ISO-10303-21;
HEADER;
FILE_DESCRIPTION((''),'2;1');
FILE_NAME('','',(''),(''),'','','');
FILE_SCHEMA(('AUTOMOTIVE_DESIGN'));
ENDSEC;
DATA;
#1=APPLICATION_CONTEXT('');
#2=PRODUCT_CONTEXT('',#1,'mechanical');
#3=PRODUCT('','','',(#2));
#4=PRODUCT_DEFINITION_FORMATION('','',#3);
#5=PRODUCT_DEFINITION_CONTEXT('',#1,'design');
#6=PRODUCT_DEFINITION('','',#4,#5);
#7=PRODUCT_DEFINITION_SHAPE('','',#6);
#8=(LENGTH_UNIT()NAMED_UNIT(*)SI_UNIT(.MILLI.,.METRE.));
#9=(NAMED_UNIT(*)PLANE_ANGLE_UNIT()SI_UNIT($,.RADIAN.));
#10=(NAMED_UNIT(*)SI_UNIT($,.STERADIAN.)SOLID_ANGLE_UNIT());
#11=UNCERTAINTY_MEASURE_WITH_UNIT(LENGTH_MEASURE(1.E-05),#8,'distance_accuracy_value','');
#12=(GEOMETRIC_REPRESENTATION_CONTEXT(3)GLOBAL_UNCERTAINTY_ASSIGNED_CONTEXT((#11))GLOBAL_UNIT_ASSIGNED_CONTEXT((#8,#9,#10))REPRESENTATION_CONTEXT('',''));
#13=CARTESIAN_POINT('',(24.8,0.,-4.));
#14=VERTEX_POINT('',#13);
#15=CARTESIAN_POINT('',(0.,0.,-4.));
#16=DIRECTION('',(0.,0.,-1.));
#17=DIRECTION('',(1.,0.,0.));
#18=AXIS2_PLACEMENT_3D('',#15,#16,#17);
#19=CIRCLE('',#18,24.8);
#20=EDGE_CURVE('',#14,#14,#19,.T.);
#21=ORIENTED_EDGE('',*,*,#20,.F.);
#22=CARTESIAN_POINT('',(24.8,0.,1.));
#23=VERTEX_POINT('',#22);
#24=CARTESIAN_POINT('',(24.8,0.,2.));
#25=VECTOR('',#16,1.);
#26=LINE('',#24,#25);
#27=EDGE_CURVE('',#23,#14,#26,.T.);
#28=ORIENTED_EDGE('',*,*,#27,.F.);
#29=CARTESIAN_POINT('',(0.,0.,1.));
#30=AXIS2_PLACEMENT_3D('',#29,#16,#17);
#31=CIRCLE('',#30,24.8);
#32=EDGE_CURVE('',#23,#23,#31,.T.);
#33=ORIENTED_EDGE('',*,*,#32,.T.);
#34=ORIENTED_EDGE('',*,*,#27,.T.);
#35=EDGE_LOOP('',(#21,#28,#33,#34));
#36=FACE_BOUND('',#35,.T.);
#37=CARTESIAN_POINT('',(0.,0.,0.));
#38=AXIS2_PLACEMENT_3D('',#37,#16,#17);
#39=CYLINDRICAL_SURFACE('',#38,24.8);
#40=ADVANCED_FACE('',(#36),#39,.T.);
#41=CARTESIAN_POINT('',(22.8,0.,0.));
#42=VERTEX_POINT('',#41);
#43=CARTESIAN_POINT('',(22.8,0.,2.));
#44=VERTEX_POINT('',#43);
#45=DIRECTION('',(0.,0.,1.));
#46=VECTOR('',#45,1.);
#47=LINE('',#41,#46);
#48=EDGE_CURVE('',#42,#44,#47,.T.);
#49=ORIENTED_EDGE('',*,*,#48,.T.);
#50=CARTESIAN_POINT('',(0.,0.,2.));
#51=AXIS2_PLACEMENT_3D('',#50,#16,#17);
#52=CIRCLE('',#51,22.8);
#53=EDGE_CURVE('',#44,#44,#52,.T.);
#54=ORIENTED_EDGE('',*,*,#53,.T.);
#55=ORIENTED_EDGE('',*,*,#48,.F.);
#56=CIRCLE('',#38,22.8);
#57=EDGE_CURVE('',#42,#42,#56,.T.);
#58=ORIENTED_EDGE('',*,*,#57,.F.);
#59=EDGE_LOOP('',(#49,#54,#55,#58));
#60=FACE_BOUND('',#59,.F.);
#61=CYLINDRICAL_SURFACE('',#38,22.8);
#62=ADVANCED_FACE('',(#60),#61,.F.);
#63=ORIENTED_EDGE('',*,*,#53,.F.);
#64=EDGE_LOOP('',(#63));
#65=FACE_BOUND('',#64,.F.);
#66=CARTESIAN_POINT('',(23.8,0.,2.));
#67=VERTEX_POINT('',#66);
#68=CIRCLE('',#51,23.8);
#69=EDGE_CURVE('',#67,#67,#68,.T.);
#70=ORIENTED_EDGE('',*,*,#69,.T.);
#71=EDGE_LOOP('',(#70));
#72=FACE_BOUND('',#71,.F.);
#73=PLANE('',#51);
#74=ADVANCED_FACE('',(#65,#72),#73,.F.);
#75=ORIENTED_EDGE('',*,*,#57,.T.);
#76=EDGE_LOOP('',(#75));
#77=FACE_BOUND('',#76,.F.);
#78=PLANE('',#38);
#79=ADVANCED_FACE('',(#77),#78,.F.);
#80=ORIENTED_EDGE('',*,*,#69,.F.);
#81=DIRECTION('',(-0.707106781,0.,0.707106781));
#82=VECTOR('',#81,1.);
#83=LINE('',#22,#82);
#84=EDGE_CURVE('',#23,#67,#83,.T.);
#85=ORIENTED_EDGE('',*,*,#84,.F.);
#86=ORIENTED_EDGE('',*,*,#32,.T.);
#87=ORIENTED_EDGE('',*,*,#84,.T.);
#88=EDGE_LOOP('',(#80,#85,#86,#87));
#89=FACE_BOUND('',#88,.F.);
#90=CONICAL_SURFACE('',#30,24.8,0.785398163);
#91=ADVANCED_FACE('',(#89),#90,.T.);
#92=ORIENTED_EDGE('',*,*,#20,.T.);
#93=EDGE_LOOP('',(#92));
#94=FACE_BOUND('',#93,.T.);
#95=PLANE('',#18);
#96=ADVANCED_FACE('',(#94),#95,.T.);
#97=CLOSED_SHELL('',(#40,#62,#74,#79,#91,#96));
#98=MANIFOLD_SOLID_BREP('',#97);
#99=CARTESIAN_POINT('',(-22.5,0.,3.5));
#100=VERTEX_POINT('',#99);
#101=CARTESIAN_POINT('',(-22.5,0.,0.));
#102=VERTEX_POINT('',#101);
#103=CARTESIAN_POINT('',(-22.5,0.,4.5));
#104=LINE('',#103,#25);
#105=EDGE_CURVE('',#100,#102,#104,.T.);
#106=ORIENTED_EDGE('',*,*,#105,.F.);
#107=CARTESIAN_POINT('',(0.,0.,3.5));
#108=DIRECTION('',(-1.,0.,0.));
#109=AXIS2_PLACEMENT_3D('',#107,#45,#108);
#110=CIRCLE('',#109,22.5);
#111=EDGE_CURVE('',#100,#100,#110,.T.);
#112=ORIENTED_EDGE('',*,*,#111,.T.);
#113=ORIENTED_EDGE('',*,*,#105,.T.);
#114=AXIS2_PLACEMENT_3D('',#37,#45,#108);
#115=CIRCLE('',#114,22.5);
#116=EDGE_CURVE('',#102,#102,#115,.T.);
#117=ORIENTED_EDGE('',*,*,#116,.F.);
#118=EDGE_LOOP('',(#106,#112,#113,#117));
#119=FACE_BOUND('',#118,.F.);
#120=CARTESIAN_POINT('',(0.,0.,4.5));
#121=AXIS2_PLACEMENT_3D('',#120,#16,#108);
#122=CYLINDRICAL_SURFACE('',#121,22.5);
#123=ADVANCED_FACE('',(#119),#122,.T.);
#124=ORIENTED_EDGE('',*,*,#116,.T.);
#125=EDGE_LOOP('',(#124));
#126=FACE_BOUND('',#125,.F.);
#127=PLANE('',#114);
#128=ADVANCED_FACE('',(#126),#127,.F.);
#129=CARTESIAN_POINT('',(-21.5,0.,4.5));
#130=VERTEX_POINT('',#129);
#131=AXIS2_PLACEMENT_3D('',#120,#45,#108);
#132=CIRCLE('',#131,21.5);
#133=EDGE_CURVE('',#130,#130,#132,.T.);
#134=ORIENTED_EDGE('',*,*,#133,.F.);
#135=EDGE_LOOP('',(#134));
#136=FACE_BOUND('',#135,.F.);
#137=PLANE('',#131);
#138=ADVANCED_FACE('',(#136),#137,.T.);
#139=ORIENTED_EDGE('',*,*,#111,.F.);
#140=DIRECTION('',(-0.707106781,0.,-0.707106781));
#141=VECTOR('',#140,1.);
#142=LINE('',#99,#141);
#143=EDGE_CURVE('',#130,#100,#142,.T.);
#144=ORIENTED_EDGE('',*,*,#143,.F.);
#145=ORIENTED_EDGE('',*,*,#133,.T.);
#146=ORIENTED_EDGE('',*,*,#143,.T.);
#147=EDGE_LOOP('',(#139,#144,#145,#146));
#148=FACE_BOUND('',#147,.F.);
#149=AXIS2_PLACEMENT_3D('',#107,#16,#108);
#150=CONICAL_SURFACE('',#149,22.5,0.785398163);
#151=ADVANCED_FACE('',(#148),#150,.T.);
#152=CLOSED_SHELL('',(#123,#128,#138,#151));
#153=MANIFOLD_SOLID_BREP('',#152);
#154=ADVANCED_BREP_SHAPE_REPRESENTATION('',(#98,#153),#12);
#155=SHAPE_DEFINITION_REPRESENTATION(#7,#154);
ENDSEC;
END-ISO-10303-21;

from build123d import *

# Parameters (mm, degrees)
F0_W     = 20
F0_H     = 2
F2_SIZE  = 1
F3_R     = 24.8
F3_R_2   = 22.8
F3_R_3   = 22.5
F4_DEPTH = 4
F5_DEPTH = 2
F6_SIZE  = 1


with BuildPart() as f1:
    # F0 (on Front) → F1 (revolve)
    with BuildSketch(Plane.XZ):
        Polygon((-22.5, 0), (0, 0), (0, 2.5), (-20, 2.5), (-20, 4.5), (-22.5, 4.5), (-22.5, 2.5), align=None)
        with Locations((-10, 3.5)):
            Rectangle(F0_W, F0_H)
    revolve(axis=Axis((0, 0, 1.25), (0, 0, 1)))

    # F2
    f2_edges = [f1.edges().sort_by_distance(p)[0] for p in [
        (22.5, 0, 4.5),
    ]]
    chamfer(f2_edges, length=F2_SIZE)


with BuildPart() as f4:
    # F3 (on face) → F4 (new body)
    with BuildSketch(Plane(origin=(0, 0, 0), x_dir=(1, 0, 0), z_dir=(0, 0, -1))):
        Circle(F3_R)
        Circle(F3_R_2, mode=Mode.SUBTRACT)
        Circle(F3_R_2)
        Circle(F3_R_3, mode=Mode.SUBTRACT)
        Circle(F3_R_3)
    extrude(amount=F4_DEPTH)

    # F3 (on face) → F5 (join)
    with BuildSketch(Plane(origin=(0, 0, 0), x_dir=(1, 0, 0), z_dir=(0, 0, -1))):
        Circle(F3_R)
        Circle(F3_R_2, mode=Mode.SUBTRACT)
    extrude(amount=-F5_DEPTH)

    # F6
    f6_edges = [f4.edges().sort_by_distance(p)[0] for p in [
        (-24.8, 0, 2),
    ]]
    chamfer(f6_edges, length=F6_SIZE)


solid = Compound([f1.part, f4.part])
